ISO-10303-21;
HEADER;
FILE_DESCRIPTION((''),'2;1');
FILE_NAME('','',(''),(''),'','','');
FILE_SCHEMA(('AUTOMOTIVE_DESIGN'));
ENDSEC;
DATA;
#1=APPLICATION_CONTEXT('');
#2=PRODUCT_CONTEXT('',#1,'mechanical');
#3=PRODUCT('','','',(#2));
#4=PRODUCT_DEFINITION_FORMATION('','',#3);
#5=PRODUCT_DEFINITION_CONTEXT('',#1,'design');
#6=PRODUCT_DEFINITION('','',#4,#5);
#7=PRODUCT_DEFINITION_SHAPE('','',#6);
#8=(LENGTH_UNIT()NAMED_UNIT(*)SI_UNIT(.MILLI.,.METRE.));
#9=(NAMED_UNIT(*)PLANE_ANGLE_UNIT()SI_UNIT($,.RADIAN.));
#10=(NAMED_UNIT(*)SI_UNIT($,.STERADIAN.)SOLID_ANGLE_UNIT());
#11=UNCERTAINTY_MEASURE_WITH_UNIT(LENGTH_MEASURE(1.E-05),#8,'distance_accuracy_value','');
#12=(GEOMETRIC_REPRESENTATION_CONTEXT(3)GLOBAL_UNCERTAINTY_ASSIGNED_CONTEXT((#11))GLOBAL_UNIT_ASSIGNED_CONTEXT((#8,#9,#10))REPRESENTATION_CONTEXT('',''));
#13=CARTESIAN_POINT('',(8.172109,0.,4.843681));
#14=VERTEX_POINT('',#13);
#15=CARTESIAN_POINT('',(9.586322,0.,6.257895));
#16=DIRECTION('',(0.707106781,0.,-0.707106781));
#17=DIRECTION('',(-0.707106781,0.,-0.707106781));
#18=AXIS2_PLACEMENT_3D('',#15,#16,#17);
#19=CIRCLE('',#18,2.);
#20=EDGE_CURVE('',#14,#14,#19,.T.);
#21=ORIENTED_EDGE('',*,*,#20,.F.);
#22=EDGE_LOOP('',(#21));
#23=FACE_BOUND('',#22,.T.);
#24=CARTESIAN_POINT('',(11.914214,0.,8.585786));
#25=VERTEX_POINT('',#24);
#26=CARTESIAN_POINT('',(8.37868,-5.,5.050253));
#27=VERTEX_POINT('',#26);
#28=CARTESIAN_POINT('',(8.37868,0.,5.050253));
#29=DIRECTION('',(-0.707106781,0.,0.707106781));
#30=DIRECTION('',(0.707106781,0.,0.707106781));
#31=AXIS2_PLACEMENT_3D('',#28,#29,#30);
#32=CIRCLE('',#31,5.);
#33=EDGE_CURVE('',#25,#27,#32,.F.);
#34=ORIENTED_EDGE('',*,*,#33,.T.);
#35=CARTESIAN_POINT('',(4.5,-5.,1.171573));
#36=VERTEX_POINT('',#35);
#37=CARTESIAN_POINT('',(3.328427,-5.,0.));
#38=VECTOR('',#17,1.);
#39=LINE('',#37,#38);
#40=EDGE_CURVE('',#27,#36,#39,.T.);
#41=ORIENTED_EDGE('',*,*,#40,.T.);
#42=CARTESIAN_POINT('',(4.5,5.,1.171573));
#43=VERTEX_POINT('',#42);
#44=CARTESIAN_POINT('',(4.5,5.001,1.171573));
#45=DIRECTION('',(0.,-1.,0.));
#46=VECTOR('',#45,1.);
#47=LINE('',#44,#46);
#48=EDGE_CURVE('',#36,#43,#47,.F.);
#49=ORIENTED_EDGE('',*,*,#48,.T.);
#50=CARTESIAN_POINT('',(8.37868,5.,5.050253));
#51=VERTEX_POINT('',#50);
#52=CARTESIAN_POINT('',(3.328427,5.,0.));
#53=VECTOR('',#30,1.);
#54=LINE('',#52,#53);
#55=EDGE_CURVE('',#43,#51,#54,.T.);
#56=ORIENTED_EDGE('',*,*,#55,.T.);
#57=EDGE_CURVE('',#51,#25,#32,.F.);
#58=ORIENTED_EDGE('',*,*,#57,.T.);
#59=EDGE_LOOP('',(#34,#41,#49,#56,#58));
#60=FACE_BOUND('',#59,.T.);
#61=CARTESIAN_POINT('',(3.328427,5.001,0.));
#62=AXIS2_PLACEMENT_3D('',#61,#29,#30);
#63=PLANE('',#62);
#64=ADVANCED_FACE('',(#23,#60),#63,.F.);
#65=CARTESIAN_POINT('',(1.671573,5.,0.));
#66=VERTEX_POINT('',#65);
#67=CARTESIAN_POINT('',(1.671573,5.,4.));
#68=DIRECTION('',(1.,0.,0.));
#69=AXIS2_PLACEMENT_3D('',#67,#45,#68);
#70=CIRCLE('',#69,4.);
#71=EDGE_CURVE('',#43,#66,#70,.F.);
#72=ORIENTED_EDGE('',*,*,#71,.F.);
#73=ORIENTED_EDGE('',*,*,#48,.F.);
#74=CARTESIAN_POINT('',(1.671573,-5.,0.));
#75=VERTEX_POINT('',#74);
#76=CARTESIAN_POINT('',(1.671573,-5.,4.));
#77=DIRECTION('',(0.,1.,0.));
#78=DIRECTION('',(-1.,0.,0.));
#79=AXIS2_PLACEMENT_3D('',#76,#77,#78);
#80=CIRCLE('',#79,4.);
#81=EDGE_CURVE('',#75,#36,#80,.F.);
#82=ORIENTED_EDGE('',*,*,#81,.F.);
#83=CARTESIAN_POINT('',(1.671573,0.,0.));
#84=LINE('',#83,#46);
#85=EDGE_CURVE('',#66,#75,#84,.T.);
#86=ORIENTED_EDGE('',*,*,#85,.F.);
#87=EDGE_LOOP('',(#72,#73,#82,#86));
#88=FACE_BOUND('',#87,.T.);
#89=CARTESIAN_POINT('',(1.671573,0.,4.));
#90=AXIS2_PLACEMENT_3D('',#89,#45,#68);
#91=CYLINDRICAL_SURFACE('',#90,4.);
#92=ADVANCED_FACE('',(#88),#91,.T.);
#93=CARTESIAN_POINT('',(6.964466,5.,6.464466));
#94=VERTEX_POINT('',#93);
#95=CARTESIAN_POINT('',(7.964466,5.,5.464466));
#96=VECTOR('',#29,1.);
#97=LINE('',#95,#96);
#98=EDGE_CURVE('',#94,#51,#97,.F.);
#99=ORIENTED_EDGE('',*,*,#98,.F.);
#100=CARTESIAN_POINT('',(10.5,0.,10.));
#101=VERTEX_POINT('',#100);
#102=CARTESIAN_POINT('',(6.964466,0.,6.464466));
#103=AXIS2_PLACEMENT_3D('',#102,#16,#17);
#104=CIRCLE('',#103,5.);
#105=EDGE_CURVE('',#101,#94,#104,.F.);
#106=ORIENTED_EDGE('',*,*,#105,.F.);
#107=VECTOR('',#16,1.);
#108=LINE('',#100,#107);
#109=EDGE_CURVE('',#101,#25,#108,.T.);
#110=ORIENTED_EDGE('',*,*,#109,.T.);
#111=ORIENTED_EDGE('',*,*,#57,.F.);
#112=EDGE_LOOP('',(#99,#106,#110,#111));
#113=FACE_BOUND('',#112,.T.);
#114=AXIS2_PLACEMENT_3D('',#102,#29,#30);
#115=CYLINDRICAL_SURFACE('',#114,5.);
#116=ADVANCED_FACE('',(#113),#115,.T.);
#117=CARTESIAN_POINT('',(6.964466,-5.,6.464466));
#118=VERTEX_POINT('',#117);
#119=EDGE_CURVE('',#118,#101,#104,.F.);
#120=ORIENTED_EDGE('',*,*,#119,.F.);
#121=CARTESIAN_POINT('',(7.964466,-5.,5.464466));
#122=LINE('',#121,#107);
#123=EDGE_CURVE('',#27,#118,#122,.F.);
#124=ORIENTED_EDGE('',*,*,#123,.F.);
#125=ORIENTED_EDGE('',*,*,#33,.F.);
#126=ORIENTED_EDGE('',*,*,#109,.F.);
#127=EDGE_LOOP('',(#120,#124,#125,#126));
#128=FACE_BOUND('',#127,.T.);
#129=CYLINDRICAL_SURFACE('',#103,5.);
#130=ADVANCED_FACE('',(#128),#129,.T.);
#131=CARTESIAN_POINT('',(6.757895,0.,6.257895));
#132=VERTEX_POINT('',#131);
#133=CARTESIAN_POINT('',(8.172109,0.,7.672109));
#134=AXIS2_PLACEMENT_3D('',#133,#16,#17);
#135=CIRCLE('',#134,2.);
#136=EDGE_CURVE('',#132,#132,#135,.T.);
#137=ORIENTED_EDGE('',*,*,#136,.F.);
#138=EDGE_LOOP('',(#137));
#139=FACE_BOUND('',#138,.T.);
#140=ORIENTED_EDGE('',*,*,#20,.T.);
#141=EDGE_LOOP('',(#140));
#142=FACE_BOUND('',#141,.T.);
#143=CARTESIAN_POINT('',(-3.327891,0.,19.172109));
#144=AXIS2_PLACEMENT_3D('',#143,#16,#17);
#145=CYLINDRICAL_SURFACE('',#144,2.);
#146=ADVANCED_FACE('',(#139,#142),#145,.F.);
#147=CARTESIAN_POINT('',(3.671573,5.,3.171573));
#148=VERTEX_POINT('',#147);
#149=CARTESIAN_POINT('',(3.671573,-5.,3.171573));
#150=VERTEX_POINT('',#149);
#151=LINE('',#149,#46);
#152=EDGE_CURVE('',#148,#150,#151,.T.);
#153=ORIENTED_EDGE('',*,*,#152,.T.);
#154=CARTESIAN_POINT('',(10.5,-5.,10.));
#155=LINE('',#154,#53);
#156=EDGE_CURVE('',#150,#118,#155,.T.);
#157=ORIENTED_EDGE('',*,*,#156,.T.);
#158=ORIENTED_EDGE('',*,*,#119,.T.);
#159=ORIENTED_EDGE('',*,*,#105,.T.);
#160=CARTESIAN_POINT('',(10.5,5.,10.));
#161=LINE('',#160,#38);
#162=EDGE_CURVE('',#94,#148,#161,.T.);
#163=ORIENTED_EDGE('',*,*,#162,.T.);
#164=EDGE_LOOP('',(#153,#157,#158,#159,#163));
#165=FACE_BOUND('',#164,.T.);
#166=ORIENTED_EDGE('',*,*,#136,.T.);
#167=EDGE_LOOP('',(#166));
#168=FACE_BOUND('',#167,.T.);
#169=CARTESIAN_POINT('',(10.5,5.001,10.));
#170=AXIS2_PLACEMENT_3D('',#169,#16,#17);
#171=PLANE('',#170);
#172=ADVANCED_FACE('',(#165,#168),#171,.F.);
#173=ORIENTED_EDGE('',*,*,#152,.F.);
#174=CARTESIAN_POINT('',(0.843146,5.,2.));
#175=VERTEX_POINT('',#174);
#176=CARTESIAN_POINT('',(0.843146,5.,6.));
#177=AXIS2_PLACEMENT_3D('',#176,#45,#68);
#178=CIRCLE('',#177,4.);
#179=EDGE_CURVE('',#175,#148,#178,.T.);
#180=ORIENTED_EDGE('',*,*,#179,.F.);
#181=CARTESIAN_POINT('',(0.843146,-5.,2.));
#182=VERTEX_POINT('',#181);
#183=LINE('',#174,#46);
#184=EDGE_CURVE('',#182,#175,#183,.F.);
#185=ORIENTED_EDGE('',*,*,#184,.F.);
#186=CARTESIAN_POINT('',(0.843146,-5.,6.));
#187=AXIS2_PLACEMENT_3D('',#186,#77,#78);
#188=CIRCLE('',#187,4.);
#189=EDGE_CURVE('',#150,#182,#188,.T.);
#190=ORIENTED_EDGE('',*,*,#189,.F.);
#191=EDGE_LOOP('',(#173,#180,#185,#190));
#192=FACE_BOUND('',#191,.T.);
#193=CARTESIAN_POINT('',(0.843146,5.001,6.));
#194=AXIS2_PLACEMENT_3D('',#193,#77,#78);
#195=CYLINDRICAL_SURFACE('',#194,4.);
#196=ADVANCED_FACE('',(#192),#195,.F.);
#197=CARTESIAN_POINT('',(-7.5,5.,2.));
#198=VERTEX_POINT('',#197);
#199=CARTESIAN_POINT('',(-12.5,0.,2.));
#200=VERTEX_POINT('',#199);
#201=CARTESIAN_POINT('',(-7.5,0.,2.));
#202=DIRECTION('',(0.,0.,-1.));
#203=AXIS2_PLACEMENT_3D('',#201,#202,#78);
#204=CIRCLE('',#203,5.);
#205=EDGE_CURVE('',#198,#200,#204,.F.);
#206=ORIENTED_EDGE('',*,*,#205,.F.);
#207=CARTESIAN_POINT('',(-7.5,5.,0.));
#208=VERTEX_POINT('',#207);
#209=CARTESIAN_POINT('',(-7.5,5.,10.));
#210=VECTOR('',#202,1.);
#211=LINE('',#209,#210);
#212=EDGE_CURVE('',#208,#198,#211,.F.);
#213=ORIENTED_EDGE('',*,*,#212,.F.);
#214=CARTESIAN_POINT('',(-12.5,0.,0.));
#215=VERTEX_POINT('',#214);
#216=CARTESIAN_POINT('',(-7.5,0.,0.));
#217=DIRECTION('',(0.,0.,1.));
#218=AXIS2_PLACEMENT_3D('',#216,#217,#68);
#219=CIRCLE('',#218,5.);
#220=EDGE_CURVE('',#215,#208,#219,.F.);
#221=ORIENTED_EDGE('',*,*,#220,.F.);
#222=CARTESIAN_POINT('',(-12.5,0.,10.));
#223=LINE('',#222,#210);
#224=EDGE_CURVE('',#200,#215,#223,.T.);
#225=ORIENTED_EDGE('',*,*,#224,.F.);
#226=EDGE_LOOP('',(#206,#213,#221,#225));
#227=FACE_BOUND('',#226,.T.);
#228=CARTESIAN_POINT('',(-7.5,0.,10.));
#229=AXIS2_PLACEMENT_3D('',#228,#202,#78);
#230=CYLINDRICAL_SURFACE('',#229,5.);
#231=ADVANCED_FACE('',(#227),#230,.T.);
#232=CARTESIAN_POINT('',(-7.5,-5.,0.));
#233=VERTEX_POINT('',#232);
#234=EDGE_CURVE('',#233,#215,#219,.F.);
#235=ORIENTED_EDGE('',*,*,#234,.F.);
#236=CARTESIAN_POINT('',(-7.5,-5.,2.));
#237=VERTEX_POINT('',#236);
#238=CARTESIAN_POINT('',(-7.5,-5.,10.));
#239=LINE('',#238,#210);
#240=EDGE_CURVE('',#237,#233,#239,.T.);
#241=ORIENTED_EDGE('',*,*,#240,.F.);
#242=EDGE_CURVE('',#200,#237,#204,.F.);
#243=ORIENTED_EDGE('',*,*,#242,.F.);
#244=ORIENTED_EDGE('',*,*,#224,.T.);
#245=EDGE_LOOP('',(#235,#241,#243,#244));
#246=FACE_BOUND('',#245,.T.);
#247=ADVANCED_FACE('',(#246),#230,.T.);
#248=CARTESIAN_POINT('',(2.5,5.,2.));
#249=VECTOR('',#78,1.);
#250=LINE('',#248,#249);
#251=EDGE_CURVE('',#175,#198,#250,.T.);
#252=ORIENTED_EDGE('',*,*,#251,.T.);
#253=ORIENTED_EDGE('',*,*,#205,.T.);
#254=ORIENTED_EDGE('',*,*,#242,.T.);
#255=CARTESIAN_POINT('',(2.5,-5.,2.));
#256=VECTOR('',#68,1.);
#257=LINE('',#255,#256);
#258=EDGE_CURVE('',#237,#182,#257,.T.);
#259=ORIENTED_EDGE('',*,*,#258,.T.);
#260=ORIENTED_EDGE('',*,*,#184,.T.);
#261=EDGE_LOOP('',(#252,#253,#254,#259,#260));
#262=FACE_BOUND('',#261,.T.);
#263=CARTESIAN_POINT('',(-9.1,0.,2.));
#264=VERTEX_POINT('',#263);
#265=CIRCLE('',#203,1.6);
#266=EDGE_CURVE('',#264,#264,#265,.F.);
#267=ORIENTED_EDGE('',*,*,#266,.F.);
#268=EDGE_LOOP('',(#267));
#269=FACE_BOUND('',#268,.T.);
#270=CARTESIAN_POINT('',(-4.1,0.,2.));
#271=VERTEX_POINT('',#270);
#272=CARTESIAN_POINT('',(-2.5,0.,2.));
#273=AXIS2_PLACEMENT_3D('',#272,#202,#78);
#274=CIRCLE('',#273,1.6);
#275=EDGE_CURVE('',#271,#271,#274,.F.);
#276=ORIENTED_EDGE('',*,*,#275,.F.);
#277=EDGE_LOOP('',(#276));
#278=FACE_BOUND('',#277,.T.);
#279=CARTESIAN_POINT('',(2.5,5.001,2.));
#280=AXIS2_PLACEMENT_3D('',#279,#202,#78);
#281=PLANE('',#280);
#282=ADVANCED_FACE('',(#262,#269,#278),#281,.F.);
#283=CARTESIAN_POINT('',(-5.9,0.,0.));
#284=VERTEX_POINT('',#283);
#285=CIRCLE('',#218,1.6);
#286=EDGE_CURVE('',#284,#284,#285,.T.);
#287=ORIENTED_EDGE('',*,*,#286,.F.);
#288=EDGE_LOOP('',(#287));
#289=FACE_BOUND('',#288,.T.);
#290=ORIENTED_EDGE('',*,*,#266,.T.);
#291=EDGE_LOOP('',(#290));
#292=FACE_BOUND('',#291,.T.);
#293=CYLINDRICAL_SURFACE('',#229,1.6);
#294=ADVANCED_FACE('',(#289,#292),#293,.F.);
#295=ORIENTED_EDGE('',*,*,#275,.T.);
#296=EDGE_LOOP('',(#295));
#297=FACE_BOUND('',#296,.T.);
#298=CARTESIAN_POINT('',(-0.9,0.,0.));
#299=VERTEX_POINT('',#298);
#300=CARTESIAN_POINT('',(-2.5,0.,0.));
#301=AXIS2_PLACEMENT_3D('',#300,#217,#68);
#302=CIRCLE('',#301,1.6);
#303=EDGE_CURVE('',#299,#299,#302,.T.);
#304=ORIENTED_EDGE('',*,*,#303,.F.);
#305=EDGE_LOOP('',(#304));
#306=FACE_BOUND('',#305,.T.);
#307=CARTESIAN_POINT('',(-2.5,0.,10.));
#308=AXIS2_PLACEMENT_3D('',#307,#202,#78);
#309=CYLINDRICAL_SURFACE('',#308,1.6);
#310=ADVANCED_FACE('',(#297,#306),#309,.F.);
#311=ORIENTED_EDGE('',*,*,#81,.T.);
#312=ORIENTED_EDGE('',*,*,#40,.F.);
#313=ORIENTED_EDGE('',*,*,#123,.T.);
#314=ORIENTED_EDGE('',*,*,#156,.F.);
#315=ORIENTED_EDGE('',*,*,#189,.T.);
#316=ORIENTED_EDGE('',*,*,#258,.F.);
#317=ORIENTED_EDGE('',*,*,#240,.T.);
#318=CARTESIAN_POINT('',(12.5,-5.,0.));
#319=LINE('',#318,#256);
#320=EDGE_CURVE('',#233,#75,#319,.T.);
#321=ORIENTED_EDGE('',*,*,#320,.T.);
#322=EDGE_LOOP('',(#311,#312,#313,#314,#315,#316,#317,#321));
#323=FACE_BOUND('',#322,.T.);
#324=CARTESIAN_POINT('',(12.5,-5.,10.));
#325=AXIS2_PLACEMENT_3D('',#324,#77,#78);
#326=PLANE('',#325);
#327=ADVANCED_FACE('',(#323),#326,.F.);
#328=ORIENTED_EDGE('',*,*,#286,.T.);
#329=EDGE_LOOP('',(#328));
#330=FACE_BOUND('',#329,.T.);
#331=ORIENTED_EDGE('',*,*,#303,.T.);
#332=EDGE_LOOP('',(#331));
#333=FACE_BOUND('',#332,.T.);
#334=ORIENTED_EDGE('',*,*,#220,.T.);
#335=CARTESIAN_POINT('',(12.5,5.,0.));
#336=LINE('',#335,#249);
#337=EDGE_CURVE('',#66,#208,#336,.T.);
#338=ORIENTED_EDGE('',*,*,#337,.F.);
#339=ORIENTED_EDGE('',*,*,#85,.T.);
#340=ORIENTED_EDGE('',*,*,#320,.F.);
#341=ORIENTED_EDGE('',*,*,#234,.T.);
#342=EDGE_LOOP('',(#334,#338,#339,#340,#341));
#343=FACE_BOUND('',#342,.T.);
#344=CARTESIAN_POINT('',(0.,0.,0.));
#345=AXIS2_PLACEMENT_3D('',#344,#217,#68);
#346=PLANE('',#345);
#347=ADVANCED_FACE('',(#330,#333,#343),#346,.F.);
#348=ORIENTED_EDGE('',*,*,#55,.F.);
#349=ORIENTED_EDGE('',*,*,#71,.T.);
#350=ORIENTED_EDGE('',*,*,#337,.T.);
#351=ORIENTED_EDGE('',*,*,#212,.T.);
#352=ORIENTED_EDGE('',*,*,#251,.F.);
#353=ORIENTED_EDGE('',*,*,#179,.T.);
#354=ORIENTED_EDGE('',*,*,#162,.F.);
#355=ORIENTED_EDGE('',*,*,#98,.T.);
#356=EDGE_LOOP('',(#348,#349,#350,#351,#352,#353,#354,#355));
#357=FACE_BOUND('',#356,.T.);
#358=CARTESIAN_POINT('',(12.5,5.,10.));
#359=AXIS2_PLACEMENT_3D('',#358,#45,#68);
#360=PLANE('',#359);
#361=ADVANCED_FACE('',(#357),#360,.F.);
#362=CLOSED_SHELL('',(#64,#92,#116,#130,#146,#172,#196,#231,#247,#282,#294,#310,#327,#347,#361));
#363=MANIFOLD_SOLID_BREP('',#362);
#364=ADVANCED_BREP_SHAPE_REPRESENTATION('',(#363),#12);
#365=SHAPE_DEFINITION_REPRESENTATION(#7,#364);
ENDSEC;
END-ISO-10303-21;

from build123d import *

# Parameters (mm, degrees)
SKETCH_1_W          = 25
SKETCH_1_H          = 10
SKETCH_1_R          = 1.6
EXTRUDE_1_DEPTH     = 10
CUT_EXTRUDE_1_REACH = 20.875
CUT_EXTRUDE_2_REACH = 20.875
SKETCH_4_R          = 2
CUT_EXTRUDE_3_DEPTH = 20.017855396
FILLET_1_R          = 4
FILLET_2_R          = 5


with BuildPart() as part:
    # ｽｹｯﾁ1 → ﾎﾞｽ - 押し出し1 (new body)
    with BuildSketch(Plane.XY):
        Rectangle(SKETCH_1_W, SKETCH_1_H)
        with Locations((-7.5, 0)):
            Circle(SKETCH_1_R, mode=Mode.SUBTRACT)
        with Locations((-2.5, 0)):
            Circle(SKETCH_1_R, mode=Mode.SUBTRACT)
    extrude(amount=EXTRUDE_1_DEPTH)

    # ｽｹｯﾁ2 → ｶｯﾄ - 押し出し1 (cut, up to next)
    with BuildSketch(Plane.XZ.offset(5), mode=Mode.PRIVATE) as cut_extrude_1_sk1:
        Polygon((2.5, 10), (10.5, 10), (2.5, 2), (-12.5, 2), (-12.5, 10), align=None)
    cut_extrude_1_tool1 = extrude(cut_extrude_1_sk1.sketch, amount=-CUT_EXTRUDE_1_REACH, mode=Mode.PRIVATE) & part.part
    # ｽｹｯﾁ2 → ｶｯﾄ - 押し出し1 (cut, up to next)
    with BuildSketch(Plane.XZ.offset(5), mode=Mode.PRIVATE) as cut_extrude_1_sk2:
        Polygon((3.328427125, 0), (12.5, 9.171572875), (12.5, 0), align=None)
    cut_extrude_1_tool2 = extrude(cut_extrude_1_sk2.sketch, amount=-CUT_EXTRUDE_1_REACH, mode=Mode.PRIVATE) & part.part
    add(cut_extrude_1_tool1.solids().sort_by_distance((-2.859649, -5, 6.280702))[0], mode=Mode.SUBTRACT)
    add(cut_extrude_1_tool2.solids().sort_by_distance((9.442809, -5, 3.057191))[0], mode=Mode.SUBTRACT)

    # ｽｹｯﾁ3 → ｶｯﾄ - 押し出し2 (cut, up to next)
    with BuildSketch(Plane.XZ.offset(5), mode=Mode.PRIVATE) as cut_extrude_2_sk1:
        Polygon((10.5, 10), (11.914213562, 8.585786438), (12.5, 9.171572875), (12.5, 10), align=None)
    cut_extrude_2_tool1 = extrude(cut_extrude_2_sk1.sketch, amount=-CUT_EXTRUDE_2_REACH, mode=Mode.PRIVATE) & part.part
    add(cut_extrude_2_tool1.solids().sort_by_distance((11.735702, -5, 9.488155))[0], mode=Mode.SUBTRACT)

    # ｽｹｯﾁ4 → ｶｯﾄ - 押し出し3 (cut, through all)
    with BuildSketch(Plane(origin=(1.664213562, 0, -1.664213562), x_dir=(-0.7071067811865509, 0, -0.7071067811865441), z_dir=(0.7071067811865441, 0, -0.7071067811865509))):
        with Locations((-11.203553391, 0)):
            Circle(SKETCH_4_R)
    extrude(amount=-CUT_EXTRUDE_3_DEPTH, mode=Mode.SUBTRACT)

    # ﾌｨﾚｯﾄ1
    fillet_1_edges = [part.edges().sort_by_distance(p)[0] for p in [
        (3.328427125, 0, 0),
        (2.5, 0, 2),
    ]]
    fillet(fillet_1_edges, radius=FILLET_1_R)

    # ﾌｨﾚｯﾄ2
    fillet_2_edges = [part.edges().sort_by_distance(p)[0] for p in [
        (11.207106781, 5, 9.292893219),
        (11.207106781, -5, 9.292893219),
        (-12.5, -5, 1),
        (-12.5, 5, 1),
    ]]
    fillet(fillet_2_edges, radius=FILLET_2_R - 0.0001)  # a hair under: the kernel refuses the full size


solid = part.part
